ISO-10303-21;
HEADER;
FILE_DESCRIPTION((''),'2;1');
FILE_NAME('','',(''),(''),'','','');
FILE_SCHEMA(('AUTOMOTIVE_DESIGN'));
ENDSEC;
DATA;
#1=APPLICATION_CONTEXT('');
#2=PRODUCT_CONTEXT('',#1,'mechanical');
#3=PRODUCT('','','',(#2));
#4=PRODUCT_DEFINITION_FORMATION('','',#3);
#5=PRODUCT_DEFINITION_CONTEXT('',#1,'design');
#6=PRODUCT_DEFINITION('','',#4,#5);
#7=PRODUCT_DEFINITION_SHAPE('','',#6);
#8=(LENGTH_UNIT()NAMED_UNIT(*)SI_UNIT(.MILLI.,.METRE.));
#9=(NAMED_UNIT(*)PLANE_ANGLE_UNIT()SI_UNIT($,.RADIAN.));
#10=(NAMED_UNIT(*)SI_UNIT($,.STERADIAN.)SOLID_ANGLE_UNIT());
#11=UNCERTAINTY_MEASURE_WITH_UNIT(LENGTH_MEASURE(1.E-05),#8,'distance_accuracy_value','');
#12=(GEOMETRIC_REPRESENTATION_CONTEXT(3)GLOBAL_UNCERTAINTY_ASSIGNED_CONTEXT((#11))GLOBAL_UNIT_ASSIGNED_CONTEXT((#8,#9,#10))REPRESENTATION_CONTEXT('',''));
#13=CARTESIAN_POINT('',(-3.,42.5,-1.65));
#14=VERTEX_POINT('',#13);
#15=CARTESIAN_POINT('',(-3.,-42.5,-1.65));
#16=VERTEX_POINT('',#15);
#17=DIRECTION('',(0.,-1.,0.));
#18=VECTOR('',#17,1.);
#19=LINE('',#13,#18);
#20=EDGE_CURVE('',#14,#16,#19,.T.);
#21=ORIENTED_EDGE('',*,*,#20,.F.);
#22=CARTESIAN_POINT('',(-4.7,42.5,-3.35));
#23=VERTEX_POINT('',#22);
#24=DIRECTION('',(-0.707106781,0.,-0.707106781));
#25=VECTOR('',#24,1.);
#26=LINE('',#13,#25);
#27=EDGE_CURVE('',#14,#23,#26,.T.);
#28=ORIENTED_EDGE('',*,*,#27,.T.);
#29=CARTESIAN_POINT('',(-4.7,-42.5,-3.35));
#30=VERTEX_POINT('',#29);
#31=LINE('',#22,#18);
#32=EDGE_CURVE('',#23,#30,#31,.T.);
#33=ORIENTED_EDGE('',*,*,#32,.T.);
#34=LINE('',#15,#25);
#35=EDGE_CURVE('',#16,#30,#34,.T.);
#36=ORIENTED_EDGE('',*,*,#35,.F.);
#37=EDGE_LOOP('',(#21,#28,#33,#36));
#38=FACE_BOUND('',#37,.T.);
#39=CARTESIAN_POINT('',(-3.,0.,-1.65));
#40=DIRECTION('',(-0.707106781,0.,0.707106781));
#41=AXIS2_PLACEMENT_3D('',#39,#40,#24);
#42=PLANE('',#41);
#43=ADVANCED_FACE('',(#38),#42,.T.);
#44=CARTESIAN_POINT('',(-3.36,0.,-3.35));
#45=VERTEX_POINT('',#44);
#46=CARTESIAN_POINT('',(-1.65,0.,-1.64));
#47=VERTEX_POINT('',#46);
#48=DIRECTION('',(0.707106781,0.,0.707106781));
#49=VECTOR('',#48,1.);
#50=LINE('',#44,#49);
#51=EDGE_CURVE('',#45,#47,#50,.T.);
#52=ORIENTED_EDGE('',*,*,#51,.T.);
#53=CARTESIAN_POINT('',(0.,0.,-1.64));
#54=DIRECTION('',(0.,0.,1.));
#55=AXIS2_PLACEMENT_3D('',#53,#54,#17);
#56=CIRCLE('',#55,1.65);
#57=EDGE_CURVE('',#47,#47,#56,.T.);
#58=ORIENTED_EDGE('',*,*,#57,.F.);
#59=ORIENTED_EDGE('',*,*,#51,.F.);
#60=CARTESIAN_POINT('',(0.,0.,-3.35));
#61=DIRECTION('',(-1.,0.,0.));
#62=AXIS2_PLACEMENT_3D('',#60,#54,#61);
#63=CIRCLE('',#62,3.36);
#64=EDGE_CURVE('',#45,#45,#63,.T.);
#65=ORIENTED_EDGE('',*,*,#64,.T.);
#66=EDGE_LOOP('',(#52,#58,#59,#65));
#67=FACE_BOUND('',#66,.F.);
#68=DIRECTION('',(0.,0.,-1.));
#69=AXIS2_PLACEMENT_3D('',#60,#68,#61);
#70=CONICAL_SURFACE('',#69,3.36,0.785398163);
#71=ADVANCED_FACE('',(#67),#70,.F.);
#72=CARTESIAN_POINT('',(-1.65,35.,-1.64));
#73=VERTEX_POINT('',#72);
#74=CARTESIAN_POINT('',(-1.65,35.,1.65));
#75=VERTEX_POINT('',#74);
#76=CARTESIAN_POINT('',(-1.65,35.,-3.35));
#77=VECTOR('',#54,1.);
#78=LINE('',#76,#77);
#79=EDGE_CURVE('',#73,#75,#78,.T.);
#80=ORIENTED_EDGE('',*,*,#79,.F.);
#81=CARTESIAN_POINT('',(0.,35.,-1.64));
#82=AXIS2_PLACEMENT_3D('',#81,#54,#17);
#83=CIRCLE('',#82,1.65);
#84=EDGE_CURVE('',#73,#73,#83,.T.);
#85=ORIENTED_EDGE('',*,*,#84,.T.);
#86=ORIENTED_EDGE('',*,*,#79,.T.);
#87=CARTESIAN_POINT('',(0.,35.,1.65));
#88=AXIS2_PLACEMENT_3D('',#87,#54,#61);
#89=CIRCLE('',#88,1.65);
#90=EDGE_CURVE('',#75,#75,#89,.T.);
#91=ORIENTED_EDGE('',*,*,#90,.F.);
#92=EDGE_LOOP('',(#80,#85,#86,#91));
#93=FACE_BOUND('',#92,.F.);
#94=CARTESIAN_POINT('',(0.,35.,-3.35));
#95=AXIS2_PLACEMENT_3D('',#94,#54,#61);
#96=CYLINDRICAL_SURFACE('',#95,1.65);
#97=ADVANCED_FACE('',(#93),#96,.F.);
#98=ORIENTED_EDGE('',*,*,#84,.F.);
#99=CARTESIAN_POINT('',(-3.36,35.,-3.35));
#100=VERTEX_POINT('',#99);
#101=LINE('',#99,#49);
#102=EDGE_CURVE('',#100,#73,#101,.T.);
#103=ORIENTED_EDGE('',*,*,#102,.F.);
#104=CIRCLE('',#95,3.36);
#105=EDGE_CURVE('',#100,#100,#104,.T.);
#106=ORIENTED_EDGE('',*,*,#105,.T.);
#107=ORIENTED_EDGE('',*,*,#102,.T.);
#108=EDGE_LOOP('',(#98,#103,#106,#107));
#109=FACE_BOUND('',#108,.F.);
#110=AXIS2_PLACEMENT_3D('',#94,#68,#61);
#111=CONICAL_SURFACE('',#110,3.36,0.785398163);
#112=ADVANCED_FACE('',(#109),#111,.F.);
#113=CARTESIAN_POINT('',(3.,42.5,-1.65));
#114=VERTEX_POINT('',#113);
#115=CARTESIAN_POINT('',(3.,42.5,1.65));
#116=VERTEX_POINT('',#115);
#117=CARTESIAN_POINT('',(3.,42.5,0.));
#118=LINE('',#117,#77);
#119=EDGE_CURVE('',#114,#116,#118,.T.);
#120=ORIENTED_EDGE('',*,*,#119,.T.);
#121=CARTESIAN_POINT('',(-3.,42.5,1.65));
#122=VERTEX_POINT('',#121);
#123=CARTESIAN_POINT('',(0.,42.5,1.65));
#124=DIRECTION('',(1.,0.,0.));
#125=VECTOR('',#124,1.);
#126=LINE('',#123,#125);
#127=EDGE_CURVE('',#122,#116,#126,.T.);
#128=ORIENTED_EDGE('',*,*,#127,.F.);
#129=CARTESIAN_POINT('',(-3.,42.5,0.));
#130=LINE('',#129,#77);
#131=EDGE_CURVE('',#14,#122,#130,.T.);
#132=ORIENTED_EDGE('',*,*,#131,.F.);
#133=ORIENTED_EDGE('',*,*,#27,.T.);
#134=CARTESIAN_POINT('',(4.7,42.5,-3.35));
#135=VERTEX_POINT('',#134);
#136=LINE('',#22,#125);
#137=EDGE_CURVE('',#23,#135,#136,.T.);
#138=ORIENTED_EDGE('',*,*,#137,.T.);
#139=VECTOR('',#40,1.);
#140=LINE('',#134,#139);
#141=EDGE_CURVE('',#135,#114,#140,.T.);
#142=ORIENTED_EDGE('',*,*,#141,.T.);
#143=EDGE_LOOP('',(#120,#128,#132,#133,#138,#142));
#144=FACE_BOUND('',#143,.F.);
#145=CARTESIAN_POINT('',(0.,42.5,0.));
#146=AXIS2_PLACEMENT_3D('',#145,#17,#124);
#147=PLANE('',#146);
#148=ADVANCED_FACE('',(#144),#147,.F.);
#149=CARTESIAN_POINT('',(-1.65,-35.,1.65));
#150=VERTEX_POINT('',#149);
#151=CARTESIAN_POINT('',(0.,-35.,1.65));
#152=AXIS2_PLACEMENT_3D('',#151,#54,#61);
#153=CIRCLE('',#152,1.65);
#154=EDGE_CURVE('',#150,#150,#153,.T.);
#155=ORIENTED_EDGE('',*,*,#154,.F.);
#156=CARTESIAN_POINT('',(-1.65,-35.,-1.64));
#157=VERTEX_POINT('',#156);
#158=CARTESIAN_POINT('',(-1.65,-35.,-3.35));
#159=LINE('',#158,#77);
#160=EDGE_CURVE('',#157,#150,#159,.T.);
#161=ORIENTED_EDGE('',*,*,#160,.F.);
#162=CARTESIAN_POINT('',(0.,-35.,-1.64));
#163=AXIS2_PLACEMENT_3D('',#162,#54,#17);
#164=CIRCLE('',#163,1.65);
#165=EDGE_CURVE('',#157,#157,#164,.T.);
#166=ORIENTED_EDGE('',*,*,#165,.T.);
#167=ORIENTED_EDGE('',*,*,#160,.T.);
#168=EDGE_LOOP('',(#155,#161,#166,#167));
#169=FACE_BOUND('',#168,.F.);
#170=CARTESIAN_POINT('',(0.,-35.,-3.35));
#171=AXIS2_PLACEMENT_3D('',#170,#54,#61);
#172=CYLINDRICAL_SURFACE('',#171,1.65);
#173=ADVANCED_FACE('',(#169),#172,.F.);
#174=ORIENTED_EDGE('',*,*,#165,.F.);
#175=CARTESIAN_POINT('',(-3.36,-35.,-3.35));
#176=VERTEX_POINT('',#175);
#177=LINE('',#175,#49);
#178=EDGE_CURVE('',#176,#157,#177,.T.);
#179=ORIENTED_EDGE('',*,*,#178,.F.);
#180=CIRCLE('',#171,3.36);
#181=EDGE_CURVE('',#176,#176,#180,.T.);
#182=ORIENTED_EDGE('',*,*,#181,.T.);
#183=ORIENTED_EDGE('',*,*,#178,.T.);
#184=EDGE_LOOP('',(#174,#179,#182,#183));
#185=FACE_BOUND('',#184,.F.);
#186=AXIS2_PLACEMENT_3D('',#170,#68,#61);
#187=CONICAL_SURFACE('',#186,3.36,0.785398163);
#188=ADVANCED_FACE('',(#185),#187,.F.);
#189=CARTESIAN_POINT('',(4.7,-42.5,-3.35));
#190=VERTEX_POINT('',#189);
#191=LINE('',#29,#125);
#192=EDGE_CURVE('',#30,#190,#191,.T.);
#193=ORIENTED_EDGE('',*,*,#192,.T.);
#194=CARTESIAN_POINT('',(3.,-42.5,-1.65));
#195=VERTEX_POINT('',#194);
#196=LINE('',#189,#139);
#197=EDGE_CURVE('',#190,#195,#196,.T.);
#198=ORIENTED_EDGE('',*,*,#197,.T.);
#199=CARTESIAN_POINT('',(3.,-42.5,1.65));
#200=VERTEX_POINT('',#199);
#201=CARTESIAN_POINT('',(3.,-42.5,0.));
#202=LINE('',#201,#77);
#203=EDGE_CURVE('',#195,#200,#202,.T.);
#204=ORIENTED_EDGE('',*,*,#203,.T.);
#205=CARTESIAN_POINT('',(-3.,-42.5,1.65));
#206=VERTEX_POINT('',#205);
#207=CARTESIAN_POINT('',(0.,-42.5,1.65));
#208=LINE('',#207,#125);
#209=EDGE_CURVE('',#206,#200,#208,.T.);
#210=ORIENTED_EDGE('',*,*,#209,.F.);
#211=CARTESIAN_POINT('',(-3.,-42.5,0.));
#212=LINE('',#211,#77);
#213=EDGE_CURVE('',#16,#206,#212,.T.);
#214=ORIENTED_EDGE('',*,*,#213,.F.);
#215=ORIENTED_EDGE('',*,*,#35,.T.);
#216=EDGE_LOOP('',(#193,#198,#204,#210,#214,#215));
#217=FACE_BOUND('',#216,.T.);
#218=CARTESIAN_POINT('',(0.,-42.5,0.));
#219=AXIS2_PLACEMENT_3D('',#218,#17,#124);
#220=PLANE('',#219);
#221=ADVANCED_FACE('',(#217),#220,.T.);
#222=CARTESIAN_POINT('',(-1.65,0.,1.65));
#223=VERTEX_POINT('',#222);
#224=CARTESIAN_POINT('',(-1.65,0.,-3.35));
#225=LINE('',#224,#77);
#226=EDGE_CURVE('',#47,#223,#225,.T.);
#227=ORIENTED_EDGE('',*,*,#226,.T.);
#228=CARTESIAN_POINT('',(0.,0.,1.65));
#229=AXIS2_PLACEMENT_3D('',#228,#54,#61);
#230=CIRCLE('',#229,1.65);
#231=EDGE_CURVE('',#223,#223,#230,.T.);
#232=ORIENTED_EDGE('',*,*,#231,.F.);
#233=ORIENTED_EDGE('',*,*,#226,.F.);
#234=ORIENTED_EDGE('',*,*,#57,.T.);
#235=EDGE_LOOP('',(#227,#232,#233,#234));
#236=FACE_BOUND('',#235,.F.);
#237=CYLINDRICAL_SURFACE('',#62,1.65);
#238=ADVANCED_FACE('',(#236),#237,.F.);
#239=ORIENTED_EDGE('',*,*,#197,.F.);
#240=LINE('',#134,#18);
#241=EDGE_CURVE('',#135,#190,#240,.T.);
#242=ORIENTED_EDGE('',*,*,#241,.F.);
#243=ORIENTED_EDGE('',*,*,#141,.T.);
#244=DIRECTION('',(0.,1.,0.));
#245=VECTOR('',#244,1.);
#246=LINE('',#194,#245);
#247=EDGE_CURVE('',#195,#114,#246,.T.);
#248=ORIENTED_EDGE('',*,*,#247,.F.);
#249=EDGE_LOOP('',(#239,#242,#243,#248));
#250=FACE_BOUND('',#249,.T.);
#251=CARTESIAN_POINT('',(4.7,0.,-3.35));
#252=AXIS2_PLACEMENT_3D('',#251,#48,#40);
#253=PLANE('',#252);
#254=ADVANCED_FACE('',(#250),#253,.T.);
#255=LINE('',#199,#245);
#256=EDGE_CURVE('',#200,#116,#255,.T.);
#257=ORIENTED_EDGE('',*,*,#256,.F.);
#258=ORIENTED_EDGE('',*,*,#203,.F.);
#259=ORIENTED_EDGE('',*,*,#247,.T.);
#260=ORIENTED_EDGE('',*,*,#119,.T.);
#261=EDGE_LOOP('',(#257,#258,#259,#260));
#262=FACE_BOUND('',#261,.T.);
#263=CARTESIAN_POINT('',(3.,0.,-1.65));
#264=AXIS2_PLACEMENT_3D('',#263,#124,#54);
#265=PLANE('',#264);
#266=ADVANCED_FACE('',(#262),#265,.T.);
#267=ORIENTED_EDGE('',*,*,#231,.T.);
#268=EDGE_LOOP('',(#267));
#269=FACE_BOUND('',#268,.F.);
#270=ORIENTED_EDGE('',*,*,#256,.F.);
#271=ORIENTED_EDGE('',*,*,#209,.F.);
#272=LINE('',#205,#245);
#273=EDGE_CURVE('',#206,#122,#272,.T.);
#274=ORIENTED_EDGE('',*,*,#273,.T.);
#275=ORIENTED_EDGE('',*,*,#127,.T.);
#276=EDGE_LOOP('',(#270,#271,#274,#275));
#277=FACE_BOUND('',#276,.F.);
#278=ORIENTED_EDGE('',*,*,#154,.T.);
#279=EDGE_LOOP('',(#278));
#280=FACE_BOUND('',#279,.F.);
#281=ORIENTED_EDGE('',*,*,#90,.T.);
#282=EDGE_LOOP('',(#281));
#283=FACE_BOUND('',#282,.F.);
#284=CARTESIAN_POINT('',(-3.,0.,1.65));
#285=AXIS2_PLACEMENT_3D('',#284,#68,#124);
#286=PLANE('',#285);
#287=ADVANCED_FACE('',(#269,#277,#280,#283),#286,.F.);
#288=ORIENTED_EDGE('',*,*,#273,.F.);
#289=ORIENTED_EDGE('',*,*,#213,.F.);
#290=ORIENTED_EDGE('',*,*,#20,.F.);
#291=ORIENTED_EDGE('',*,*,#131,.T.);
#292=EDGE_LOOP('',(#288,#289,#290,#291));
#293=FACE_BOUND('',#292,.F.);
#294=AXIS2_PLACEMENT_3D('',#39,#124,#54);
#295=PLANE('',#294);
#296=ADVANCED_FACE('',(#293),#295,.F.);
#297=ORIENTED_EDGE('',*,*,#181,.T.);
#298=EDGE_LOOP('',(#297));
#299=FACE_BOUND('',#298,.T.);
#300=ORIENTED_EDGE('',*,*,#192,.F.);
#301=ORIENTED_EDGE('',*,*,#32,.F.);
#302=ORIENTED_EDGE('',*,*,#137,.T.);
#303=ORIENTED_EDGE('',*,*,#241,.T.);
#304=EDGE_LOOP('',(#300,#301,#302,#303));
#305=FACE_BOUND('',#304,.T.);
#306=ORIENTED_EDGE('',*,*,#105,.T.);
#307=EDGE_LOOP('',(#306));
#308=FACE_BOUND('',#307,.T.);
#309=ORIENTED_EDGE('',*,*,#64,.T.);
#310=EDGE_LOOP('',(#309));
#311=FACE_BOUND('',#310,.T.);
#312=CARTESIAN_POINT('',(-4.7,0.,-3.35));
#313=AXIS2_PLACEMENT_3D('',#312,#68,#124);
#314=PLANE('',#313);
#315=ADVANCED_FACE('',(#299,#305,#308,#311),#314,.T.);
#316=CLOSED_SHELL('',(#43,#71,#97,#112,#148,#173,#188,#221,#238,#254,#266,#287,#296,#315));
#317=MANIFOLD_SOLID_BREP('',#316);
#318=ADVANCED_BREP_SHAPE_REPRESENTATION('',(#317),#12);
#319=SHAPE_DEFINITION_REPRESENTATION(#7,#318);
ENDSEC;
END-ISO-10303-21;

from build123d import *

# Parameters (mm, degrees)
F0_W           = 6
F0_H           = 3.3
F1_DEPTH       = 42.5
F3_D           = 3.3
F3_CSINK_D     = 6.72
F3_CSINK_ANGLE = 90


with BuildPart() as f1:
    # F0 (on Front) → F1 (new body, symmetric)
    with BuildSketch(Plane.XZ):
        Rectangle(F0_W, F0_H)
        Polygon((4.7, -3.35), (3, -1.65), (-3, -1.65), (-4.7, -3.35), align=None)
    extrude(amount=F1_DEPTH, both=True)

    # F3 (through all)
    with Locations(Plane(origin=(0, 0, -3.35), x_dir=(1, 0, 0), z_dir=(0, 0, -1))):
        with Locations((0, 0), (0, 35), (0, -35)):
            CounterSinkHole(F3_D / 2, F3_CSINK_D / 2, counter_sink_angle=F3_CSINK_ANGLE)


solid = f1.part
